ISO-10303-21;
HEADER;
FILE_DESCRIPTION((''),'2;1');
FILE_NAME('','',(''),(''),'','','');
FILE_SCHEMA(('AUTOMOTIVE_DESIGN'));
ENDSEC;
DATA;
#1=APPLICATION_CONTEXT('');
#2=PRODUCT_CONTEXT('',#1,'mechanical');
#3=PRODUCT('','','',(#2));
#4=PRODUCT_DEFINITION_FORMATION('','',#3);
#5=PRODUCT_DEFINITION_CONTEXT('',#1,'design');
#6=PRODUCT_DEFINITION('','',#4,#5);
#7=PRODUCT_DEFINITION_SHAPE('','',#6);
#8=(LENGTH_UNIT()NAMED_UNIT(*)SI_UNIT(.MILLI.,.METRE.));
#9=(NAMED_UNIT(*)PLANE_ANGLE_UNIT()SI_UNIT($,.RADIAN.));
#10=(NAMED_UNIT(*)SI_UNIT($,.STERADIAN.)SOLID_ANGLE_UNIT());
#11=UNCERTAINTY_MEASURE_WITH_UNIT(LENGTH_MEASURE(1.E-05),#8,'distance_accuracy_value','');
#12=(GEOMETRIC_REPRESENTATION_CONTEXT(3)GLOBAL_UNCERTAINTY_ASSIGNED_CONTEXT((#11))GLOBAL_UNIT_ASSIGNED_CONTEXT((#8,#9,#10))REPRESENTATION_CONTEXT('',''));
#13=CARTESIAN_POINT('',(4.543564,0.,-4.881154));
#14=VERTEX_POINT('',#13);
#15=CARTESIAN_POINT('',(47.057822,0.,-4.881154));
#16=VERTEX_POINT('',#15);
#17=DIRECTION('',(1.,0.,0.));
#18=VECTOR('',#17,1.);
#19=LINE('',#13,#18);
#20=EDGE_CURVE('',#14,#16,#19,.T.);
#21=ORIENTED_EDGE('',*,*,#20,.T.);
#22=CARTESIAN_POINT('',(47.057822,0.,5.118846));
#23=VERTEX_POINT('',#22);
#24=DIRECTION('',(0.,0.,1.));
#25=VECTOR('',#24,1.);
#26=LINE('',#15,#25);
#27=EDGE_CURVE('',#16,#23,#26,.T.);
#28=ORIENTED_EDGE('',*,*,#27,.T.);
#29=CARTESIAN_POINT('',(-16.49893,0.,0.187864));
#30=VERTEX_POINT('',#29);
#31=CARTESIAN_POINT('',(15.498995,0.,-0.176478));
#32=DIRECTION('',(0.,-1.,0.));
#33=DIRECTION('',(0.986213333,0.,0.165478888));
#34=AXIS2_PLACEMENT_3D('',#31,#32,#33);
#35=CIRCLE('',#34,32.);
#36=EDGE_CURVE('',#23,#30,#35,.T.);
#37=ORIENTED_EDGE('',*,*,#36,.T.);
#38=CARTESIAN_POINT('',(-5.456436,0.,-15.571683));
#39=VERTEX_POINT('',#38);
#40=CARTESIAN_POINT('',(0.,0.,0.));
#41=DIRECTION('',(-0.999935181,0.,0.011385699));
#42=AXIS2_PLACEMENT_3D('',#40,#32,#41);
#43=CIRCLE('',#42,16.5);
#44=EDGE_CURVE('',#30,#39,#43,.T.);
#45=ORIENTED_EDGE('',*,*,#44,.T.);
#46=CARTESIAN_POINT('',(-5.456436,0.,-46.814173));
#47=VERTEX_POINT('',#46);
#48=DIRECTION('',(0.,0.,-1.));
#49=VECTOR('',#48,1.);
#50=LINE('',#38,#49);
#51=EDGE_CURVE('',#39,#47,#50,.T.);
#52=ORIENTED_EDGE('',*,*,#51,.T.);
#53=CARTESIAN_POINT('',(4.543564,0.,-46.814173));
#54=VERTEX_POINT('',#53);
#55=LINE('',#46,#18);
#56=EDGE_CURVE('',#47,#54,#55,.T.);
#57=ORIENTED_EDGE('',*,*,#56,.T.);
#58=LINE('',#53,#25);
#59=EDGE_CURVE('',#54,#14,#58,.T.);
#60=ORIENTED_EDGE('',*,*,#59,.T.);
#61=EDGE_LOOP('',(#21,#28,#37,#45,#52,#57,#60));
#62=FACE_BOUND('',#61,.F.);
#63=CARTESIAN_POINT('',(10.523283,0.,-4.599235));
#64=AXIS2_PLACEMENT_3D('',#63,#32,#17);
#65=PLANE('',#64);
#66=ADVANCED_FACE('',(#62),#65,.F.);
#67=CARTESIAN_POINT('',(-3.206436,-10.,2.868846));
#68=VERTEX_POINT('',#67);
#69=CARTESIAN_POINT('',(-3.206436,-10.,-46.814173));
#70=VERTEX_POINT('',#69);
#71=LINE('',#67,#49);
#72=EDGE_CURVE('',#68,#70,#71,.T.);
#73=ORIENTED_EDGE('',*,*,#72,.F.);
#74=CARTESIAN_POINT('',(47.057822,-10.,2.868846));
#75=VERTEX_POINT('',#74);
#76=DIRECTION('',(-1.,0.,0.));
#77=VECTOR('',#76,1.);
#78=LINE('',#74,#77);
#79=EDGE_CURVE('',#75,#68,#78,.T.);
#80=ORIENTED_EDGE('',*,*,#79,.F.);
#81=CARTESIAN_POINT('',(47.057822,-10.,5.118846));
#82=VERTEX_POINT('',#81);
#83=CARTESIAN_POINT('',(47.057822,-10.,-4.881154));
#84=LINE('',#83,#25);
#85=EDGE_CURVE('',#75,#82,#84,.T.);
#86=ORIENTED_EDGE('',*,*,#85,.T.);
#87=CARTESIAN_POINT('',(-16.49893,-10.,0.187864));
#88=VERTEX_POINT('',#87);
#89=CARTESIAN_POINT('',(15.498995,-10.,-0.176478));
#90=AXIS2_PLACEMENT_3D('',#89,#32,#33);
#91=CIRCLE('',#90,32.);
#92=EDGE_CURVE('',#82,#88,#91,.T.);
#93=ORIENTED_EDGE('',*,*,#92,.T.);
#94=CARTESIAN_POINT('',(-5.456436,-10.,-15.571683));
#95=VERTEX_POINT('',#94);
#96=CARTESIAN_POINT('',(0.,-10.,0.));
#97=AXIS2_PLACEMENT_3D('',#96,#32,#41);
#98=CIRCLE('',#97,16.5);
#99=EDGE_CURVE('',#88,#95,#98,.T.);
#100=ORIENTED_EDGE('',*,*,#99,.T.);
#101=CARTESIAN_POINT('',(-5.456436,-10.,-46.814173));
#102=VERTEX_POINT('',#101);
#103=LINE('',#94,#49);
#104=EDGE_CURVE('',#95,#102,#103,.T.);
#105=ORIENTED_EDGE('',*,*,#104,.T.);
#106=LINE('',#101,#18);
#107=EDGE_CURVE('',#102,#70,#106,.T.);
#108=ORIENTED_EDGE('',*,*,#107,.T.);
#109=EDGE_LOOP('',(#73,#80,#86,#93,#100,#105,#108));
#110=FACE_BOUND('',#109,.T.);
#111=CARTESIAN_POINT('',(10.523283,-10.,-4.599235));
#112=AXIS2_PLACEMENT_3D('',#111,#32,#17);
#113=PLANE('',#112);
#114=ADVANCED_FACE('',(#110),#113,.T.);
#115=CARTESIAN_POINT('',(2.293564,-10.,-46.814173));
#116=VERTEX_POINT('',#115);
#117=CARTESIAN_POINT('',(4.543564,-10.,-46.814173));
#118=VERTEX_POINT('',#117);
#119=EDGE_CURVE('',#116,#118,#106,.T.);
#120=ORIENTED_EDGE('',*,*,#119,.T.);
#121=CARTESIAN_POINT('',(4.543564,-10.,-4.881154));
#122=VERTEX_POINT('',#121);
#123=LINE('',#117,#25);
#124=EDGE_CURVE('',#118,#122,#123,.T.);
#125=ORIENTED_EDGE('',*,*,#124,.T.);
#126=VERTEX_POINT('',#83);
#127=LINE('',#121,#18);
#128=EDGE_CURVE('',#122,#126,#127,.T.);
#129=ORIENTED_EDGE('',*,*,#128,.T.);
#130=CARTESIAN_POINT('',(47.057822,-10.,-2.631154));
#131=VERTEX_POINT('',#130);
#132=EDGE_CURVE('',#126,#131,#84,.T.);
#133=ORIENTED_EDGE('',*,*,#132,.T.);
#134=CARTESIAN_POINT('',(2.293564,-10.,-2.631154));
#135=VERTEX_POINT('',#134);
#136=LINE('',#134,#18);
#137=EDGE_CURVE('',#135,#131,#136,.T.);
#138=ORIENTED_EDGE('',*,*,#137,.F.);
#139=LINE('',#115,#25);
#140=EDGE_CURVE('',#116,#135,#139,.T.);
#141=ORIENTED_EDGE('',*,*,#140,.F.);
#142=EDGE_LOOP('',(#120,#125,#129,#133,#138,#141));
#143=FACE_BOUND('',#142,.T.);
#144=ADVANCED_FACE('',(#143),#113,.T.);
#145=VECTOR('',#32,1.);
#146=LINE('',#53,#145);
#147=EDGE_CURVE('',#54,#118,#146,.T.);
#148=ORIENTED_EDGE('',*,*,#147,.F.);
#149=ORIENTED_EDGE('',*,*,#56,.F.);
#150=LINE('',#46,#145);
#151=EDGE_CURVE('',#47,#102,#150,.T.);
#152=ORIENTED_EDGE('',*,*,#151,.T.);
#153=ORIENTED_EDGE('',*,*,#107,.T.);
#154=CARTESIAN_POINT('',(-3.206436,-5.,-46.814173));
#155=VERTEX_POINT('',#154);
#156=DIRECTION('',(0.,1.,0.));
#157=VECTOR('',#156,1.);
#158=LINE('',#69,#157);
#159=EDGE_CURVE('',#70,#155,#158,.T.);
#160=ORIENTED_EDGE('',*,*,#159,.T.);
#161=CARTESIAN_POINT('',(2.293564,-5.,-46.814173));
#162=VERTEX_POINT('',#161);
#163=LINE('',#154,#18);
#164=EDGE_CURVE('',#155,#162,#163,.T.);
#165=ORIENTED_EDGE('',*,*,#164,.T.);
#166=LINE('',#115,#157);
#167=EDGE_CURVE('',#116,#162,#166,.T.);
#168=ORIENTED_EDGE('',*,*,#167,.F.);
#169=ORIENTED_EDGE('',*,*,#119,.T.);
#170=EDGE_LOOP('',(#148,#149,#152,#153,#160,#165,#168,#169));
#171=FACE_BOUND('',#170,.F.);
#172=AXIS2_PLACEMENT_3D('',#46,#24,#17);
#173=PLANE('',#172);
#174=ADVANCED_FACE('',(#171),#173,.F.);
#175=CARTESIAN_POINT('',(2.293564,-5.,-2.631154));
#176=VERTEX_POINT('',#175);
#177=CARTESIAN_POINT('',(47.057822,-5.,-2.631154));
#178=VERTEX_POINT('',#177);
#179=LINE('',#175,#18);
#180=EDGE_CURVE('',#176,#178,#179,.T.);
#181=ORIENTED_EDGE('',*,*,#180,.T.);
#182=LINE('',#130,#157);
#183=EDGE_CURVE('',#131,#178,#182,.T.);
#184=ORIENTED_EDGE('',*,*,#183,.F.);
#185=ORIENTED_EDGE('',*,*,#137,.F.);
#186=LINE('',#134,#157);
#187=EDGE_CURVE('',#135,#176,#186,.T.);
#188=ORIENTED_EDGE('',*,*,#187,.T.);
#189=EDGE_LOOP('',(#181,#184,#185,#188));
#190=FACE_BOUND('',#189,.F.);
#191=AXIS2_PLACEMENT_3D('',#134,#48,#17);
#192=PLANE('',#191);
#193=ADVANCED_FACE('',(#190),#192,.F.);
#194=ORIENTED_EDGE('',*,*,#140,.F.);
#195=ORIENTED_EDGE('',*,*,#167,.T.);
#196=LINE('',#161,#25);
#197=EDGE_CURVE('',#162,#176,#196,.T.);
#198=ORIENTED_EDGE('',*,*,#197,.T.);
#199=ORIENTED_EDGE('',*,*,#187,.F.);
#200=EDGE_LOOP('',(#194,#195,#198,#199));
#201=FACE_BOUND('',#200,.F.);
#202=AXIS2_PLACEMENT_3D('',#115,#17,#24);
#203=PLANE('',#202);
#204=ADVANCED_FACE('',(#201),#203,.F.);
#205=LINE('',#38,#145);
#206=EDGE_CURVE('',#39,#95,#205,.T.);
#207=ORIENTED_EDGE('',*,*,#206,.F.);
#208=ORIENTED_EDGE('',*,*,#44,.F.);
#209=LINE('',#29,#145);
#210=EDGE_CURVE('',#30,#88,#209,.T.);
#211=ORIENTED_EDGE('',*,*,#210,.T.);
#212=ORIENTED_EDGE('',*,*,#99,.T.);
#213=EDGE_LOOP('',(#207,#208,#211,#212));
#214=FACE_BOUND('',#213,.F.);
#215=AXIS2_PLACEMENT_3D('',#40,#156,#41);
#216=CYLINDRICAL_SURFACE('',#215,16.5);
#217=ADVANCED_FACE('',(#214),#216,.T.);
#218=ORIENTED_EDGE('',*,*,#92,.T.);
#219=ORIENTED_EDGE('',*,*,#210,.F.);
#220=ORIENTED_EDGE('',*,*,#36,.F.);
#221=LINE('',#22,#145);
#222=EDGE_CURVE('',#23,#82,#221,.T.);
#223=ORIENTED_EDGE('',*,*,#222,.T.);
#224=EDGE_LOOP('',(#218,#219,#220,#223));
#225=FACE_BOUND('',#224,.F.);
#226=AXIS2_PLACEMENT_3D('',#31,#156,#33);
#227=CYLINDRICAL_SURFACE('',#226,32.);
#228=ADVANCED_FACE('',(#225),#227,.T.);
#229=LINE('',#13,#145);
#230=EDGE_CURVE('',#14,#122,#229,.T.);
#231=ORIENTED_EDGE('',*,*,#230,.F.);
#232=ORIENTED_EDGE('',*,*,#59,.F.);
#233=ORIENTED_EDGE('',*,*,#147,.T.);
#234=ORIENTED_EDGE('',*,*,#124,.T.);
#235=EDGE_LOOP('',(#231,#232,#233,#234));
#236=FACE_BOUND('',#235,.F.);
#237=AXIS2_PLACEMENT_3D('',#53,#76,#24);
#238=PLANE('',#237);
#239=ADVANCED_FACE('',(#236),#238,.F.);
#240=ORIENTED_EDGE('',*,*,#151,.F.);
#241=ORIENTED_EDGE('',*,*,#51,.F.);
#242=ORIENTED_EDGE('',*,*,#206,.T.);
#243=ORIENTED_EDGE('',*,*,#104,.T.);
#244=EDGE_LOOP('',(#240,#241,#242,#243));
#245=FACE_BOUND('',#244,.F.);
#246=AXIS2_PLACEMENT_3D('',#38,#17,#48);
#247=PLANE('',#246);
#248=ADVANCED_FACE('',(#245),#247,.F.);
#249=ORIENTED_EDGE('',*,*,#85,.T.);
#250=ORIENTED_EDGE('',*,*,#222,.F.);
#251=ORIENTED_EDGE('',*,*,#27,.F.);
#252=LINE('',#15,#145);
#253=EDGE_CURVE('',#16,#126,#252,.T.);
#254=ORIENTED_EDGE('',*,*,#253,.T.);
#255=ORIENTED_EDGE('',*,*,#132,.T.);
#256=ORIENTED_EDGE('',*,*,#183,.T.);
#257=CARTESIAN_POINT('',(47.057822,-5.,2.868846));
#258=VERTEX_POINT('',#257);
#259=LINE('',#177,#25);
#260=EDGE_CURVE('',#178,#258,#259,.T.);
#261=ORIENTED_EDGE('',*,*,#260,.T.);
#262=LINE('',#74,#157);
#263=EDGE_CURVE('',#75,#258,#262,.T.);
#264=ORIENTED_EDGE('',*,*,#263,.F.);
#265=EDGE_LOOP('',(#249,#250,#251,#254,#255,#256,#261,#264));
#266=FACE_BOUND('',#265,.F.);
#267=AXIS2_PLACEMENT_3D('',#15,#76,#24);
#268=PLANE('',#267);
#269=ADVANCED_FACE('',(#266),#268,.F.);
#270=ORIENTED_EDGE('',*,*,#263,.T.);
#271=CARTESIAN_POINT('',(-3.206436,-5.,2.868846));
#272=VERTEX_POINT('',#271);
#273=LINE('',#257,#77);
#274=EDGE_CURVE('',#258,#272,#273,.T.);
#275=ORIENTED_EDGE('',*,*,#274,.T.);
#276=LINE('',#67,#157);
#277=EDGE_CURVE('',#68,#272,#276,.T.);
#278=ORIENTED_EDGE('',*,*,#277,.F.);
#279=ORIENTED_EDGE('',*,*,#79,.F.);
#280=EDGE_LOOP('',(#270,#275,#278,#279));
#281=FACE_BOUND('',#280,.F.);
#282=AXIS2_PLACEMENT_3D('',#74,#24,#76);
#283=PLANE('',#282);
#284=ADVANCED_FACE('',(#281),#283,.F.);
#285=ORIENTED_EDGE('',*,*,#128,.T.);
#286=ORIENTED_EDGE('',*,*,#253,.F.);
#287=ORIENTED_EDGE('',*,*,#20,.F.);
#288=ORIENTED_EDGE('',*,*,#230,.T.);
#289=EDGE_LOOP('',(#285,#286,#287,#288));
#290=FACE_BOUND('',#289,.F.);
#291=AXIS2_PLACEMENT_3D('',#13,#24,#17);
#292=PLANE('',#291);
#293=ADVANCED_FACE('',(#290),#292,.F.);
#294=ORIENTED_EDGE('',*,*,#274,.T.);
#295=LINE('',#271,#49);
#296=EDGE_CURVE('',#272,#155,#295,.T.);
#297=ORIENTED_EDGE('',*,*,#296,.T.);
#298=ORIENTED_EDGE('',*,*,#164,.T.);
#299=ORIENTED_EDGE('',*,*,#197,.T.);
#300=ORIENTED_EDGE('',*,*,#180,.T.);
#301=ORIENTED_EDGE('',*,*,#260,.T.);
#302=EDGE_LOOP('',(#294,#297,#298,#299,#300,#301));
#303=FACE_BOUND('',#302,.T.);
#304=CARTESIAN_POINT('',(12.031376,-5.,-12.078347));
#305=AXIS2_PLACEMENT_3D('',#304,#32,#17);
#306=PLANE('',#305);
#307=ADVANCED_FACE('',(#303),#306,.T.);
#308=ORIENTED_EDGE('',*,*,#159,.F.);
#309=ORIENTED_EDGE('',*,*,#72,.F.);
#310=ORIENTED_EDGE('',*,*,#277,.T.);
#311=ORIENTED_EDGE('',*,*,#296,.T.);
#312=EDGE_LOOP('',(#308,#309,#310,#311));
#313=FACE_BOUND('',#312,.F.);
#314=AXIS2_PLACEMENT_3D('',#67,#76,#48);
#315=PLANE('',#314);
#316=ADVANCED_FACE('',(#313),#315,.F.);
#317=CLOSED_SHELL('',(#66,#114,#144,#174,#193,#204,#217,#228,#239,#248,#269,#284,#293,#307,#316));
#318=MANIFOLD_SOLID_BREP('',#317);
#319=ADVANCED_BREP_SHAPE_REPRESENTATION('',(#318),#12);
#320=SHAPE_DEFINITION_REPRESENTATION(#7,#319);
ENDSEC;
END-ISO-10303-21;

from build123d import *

# Parameters (mm, degrees)
F1_DEPTH = 10
F3_DEPTH = 5


# Not quite as in the source:
# - a feature names something its author has since deleted; it is built from what else it names


with BuildPart() as f1:
    # F0 (on Front) → F1 (new body)
    with BuildSketch(Plane.XZ):
        with BuildLine():
            Line((4.5435639801, -4.8811539246), (47.0578219503, -4.8811539246))
            Line((47.0578219503, -4.8811539246), (47.0578219503, 5.1188460754))
            ThreePointArc((47.0578219503, 5.1188460754), (13.0237482483, 31.7276460361), (-16.4989304836, 0.1878640363))
            ThreePointArc((-16.4989304836, 0.1878640363), (-13.5129700245, -9.4683494399), (-5.4564360199, -15.5716828237))
            Line((-5.4564360199, -15.5716828237), (-5.4564360199, -46.8141730692))
            Line((-5.4564360199, -46.8141730692), (4.5435639801, -46.8141730692))
            Line((4.5435639801, -46.8141730692), (4.5435639801, -4.8811539246))
        make_face()
    extrude(amount=F1_DEPTH)

    # F2 (on face) → F3 (cut)
    with BuildSketch(Plane.XZ.offset(10)):
        Polygon((47.0578219503, -2.6311539246), (47.0578219503, 2.8688460754), (-3.2064360199, 2.8688460754), (-3.2064360199, -2.6311539246), (-3.2064360199, -46.8141730692), (2.2935639801, -46.8141730692), (2.2935639801, -2.6311539246), align=None)
    extrude(amount=-F3_DEPTH, mode=Mode.SUBTRACT)


solid = f1.part
